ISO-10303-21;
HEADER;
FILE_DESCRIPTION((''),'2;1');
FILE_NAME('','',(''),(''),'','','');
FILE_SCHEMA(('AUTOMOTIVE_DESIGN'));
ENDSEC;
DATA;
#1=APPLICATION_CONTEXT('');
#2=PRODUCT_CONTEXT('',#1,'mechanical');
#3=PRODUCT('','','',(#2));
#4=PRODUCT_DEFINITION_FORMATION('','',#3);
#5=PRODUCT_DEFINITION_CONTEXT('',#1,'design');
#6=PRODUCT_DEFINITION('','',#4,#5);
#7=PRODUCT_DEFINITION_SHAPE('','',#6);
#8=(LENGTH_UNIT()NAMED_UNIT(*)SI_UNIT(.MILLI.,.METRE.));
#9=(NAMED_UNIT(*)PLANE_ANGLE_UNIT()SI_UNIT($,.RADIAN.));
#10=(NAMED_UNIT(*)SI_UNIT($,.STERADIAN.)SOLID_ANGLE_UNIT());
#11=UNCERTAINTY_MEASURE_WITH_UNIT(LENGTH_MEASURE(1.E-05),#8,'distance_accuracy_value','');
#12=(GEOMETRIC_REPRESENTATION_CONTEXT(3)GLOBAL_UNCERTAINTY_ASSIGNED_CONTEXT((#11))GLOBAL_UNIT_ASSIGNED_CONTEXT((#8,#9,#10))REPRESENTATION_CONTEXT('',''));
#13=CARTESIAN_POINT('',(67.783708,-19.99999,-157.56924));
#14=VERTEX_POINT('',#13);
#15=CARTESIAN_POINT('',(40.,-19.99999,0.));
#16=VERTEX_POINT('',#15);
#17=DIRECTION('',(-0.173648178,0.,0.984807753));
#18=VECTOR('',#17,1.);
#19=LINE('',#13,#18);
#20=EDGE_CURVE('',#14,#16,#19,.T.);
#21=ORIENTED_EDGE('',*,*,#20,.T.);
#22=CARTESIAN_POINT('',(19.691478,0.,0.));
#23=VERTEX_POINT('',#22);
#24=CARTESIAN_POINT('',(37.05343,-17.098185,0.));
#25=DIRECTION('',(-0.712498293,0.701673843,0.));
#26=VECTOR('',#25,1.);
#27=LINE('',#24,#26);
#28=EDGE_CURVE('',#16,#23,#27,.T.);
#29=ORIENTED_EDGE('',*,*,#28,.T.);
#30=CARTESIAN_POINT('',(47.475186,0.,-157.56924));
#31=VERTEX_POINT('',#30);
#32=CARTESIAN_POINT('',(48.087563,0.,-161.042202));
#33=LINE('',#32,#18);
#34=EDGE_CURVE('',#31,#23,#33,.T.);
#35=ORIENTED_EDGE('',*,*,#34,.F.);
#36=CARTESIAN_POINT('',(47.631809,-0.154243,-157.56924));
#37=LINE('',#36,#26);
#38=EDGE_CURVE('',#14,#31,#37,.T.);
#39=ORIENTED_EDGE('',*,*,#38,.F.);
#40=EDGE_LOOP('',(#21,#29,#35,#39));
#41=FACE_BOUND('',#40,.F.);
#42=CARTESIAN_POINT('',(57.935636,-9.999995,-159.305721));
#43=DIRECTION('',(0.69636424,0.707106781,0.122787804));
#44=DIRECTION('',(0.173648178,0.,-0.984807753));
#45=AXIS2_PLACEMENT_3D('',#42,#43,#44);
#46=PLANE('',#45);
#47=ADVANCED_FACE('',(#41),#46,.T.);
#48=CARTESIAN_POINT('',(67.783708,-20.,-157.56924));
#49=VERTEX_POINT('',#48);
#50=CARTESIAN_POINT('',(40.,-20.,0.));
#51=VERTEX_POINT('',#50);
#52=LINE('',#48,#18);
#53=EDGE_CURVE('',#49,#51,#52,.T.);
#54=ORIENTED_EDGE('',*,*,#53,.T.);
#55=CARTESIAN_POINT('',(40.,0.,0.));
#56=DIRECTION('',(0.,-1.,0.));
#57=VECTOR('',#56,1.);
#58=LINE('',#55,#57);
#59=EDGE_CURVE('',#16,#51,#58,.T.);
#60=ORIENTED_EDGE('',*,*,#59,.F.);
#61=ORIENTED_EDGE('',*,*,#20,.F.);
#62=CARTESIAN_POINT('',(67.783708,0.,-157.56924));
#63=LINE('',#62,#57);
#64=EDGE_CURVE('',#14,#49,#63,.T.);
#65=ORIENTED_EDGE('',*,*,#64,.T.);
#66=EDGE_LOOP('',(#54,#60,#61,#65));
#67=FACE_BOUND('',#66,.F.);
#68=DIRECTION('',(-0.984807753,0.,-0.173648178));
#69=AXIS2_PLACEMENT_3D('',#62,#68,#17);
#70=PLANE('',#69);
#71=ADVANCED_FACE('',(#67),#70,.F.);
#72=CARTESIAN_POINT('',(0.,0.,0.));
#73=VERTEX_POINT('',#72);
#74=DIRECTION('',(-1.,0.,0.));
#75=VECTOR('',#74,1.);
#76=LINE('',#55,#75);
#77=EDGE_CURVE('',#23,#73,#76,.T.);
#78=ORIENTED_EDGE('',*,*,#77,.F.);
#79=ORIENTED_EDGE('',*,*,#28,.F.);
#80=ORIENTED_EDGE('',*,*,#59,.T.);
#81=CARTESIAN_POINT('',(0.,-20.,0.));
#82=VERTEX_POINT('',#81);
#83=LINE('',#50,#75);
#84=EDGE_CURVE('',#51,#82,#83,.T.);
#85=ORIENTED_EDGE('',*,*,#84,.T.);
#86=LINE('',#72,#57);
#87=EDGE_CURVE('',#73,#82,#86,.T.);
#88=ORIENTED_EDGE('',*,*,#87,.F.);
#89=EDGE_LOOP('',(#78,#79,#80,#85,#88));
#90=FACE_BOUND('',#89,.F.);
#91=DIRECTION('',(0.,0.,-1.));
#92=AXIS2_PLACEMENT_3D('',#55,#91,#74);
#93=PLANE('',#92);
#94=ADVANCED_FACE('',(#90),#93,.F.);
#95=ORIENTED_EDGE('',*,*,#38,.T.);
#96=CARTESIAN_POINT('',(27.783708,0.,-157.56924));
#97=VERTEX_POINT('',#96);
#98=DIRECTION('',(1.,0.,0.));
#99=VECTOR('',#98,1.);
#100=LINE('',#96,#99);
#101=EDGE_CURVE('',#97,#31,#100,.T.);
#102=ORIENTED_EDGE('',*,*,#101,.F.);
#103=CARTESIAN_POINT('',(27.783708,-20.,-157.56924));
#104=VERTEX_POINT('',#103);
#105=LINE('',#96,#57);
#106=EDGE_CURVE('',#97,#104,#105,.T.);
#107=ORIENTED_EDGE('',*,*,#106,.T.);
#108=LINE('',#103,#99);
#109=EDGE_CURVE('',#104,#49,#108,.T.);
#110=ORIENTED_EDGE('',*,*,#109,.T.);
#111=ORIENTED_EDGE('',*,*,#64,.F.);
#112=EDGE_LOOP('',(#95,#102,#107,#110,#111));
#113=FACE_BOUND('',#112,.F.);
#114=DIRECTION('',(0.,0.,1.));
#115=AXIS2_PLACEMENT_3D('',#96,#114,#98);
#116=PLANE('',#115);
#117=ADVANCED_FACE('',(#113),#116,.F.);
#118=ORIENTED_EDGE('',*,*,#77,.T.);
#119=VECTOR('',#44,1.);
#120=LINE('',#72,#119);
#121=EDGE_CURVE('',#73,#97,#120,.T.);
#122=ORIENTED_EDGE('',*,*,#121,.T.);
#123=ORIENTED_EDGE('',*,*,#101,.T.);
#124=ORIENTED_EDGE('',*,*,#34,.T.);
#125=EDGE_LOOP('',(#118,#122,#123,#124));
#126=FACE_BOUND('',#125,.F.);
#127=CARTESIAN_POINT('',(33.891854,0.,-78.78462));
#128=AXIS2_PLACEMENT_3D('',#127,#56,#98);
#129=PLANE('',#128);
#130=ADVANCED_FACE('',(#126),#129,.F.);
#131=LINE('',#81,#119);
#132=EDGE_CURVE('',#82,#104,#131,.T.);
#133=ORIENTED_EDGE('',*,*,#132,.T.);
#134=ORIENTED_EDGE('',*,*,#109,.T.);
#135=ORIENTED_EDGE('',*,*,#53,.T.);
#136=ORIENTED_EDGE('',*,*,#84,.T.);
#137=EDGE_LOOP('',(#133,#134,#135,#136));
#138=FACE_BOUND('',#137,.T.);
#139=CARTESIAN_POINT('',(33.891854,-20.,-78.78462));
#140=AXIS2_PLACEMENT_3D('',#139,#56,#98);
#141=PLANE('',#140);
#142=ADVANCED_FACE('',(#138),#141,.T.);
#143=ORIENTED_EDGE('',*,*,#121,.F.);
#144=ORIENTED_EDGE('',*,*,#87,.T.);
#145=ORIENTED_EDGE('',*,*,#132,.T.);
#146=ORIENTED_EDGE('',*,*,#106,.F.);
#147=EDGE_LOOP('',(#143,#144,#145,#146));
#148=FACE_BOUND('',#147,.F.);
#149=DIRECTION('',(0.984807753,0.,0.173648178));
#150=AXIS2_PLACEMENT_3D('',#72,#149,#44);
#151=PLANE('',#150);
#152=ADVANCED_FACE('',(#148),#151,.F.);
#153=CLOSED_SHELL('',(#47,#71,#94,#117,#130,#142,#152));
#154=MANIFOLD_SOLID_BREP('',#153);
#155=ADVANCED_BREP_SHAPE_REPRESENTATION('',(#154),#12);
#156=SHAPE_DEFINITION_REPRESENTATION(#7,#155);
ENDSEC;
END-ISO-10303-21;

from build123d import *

# Parameters (mm, degrees)
F1_DEPTH = 20
F2_SIZE  = 19.99999


# Not quite as in the source:
# - a fillet or chamfer is up to 0.001 mm smaller than in the source, because OpenCascade refuses the exact size


with BuildPart() as f1:
    # F0 (on Front) → F1 (new body)
    with BuildSketch(Plane.XZ):
        Polygon((40, 0), (0, 0), (27.7837084267, -157.569240482), (67.7837084267, -157.569240482), align=None)
    extrude(amount=F1_DEPTH)

    # F2 (size 20 in the source; OpenCascade refuses exactly that, so slightly less here)
    f2_edges = [f1.edges().sort_by_distance(p)[0] for p in [
        (53.891854, 0, -78.78462),
    ]]
    chamfer(f2_edges, length=F2_SIZE)


solid = f1.part
